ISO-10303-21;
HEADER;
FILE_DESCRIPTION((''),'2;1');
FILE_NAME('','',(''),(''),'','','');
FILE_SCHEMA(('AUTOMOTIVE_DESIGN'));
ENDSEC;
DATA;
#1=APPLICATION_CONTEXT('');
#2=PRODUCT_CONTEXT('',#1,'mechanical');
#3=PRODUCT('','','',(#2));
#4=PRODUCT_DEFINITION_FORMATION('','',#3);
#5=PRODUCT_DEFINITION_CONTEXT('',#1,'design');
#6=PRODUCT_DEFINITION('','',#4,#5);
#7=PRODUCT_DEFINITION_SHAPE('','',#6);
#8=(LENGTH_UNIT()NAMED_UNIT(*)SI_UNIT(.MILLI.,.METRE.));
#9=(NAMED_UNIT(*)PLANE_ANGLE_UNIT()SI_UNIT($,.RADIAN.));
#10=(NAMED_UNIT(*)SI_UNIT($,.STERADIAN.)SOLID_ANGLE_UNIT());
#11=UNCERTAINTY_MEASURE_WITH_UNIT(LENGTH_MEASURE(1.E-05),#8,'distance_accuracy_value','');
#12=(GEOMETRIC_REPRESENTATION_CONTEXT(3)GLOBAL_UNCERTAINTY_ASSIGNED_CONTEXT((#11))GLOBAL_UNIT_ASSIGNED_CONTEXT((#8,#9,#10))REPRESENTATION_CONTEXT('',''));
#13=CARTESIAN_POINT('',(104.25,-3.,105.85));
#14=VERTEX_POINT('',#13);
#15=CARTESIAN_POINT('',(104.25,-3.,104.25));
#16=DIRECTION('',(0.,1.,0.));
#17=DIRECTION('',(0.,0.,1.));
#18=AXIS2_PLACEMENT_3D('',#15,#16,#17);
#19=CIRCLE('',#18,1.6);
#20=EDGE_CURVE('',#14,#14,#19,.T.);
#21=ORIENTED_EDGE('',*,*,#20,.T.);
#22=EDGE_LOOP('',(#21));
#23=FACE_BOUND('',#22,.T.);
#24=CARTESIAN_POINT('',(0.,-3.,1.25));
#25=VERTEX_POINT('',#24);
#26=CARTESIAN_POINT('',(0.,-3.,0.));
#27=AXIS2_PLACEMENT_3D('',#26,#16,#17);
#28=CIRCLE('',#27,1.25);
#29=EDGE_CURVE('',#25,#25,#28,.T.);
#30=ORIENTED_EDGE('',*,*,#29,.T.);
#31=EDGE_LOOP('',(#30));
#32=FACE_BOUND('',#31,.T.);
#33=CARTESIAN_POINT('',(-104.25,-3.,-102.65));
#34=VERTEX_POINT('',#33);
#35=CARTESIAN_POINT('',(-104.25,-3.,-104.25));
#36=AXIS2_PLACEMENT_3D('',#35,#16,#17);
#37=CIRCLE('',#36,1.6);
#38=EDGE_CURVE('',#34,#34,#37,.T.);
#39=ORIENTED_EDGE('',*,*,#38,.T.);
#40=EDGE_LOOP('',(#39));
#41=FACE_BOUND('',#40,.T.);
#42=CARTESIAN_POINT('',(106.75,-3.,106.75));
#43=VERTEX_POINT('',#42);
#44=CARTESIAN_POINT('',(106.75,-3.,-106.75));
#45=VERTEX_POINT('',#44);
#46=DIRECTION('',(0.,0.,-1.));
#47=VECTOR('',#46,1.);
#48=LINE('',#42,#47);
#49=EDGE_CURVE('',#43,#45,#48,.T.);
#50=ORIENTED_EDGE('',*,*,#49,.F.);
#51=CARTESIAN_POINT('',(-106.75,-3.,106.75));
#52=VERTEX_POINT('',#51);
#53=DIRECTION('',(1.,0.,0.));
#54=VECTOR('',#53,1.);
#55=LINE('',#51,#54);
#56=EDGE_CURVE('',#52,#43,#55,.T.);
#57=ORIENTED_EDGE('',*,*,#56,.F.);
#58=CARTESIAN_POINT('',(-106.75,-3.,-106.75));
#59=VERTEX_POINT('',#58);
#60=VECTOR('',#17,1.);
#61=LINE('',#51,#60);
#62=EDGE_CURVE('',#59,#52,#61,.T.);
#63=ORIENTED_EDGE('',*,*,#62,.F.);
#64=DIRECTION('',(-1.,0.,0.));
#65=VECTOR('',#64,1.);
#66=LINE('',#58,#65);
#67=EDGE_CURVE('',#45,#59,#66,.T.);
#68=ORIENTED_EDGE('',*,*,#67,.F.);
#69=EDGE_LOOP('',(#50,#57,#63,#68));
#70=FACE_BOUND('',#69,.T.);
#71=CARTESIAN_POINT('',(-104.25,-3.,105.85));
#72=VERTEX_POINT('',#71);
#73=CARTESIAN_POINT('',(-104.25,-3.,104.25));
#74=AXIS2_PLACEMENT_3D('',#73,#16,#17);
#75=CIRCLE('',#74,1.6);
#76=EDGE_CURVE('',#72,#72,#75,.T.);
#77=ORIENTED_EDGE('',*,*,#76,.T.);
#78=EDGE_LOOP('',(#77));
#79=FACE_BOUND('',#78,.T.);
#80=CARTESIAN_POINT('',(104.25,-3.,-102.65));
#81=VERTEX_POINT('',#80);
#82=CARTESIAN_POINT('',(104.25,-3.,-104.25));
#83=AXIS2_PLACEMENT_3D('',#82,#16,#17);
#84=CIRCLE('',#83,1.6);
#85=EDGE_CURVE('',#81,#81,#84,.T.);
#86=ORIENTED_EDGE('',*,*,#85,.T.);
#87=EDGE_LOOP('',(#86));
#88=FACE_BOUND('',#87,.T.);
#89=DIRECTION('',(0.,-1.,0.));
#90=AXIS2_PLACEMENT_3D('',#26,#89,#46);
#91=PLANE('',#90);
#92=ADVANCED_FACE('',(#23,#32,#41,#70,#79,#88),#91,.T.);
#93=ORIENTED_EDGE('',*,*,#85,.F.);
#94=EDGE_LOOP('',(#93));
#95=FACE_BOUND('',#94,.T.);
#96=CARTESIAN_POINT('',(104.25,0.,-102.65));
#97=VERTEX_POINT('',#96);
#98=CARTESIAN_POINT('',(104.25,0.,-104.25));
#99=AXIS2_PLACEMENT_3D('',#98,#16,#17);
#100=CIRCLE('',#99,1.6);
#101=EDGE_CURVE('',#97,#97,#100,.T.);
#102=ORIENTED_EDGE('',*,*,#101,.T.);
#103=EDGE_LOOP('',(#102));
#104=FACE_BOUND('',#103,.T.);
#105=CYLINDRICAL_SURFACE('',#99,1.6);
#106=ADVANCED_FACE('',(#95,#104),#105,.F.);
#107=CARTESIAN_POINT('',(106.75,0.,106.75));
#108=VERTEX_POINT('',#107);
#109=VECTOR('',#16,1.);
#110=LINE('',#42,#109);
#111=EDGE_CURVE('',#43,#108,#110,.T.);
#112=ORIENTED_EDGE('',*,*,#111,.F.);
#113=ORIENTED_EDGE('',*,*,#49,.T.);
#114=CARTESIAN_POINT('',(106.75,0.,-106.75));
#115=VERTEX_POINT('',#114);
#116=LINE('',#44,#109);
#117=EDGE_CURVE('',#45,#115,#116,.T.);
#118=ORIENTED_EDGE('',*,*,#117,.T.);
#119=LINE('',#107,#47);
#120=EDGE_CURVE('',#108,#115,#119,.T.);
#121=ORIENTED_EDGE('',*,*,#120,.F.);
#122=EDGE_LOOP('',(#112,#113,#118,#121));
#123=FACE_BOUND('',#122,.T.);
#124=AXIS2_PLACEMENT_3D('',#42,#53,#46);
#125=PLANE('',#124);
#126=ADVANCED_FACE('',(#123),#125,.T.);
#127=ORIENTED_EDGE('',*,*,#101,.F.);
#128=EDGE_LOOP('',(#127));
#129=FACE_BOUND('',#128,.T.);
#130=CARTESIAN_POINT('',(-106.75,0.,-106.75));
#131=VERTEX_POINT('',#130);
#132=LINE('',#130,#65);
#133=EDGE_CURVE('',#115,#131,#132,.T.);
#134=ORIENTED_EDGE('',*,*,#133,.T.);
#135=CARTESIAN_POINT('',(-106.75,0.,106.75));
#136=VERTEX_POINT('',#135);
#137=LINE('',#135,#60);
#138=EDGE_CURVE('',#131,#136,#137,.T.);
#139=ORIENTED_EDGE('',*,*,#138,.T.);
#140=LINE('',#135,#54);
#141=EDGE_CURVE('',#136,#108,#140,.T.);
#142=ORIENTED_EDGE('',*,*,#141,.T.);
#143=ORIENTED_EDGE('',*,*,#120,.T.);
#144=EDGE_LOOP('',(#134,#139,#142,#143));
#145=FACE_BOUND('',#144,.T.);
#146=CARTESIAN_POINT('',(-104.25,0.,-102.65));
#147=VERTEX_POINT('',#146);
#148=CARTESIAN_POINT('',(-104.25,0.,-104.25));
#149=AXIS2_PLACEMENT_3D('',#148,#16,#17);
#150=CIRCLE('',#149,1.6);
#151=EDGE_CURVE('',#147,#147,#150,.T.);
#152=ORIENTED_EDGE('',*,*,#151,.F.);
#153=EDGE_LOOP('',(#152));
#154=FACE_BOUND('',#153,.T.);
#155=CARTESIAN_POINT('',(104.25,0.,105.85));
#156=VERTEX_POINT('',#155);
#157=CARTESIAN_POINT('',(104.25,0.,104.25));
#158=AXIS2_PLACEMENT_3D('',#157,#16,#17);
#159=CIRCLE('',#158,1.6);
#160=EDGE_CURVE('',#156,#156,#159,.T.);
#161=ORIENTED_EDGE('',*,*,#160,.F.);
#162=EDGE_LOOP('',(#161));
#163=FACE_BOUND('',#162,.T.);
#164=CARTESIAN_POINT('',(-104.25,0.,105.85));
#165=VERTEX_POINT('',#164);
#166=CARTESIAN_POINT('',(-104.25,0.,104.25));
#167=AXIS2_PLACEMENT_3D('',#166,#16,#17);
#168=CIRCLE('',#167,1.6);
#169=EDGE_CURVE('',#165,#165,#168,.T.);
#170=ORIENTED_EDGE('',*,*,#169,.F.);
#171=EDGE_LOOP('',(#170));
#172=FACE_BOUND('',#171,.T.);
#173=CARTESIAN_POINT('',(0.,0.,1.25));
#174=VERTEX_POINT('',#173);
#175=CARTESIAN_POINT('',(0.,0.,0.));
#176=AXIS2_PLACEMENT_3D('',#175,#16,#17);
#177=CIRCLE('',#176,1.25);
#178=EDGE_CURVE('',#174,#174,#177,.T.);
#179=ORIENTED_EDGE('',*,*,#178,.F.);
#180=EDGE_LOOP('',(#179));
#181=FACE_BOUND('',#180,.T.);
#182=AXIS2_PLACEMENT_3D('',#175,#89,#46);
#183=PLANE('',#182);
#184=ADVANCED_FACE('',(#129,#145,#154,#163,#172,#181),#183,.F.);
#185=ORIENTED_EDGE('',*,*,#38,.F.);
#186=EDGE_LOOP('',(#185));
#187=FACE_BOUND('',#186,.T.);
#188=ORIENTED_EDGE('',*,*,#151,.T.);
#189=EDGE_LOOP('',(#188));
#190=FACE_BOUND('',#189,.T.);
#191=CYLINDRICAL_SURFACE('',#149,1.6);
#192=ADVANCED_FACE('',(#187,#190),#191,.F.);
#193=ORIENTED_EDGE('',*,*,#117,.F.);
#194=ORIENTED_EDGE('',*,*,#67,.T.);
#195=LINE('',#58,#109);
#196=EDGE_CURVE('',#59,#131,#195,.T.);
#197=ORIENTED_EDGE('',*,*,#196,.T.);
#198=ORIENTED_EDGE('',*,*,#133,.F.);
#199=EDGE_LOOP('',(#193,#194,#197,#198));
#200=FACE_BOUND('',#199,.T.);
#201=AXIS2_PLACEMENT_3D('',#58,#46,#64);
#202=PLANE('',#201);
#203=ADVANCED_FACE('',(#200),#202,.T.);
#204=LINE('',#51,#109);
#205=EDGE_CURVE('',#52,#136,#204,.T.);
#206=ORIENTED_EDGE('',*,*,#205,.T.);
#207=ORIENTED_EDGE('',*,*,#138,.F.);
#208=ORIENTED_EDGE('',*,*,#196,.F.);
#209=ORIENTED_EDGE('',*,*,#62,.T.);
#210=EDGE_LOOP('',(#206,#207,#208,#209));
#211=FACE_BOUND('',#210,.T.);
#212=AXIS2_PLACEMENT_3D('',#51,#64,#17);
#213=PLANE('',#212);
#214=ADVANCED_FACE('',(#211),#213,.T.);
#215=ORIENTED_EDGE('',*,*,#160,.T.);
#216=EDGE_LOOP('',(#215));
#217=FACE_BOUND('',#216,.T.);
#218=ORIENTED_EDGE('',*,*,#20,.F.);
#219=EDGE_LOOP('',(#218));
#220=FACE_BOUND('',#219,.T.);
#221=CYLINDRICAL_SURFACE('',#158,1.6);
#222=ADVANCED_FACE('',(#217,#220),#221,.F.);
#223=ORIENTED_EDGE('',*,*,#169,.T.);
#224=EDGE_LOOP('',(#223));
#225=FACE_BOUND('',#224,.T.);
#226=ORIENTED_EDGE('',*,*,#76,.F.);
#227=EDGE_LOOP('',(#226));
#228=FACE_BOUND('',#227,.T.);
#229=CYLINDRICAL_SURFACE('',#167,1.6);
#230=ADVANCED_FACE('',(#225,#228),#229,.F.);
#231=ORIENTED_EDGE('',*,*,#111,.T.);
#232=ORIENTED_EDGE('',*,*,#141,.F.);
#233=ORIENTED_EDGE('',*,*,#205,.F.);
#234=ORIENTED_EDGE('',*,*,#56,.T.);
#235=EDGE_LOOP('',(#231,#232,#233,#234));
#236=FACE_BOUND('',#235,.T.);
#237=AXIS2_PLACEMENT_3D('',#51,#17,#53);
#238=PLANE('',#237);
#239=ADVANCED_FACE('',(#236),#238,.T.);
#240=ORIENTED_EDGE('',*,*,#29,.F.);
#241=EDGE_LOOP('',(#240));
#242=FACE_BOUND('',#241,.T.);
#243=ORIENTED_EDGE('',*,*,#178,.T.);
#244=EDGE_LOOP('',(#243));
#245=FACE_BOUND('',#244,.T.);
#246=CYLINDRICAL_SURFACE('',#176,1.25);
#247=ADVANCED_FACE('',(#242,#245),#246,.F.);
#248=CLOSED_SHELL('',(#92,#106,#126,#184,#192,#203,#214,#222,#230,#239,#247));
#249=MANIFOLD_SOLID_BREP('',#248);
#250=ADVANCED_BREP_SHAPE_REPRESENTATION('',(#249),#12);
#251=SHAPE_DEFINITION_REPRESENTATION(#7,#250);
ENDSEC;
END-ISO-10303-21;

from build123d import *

# Parameters (mm, degrees)
SKETCH1_W                       = 213.5
SKETCH1_H                       = 213.5
BASE_FLANGE1_DEPTH              = 3
F_3_0MM_CLEARANCE_DOWEL_HOLE1_D = 3.2
F_2_5MM_CLEARANCE_DOWEL_HOLE1_D = 2.5


# Sheet-metal steps are written as plain solids
with BuildPart() as part:
    # Sketch1 → Base-Flange1 (new body)
    with BuildSketch(Plane(origin=(0, 0, 0), x_dir=(1, 0, 0), z_dir=(0, 1, 0))):
        Rectangle(SKETCH1_W, SKETCH1_H)
    extrude(amount=-BASE_FLANGE1_DEPTH)

    # Ø3.0mm Clearance Dowel Hole1 (through all)
    with Locations(Plane(origin=(0, 0, 0), x_dir=(1, 0, 0), z_dir=(0, 1, 0))):
        with Locations((-104.25, 104.25), (-104.25, -104.25)):
            f_3_0mm_clearance_dowel_hole1 = Hole(F_3_0MM_CLEARANCE_DOWEL_HOLE1_D / 2)

    # Mirror2: Ø3.0mm Clearance Dowel Hole1 across plane
    add(f_3_0mm_clearance_dowel_hole1.mirror(Plane(origin=(0, 0, 0), x_dir=(0, 0, 1), z_dir=(1, 0, 0))), mode=Mode.SUBTRACT)

    # Ø2.5mm Clearance Dowel Hole1 (through all)
    with Locations(Plane(origin=(0, 0, 0), x_dir=(1, 0, 0), z_dir=(0, 1, 0))):
        with Locations((0, 0)):
            Hole(F_2_5MM_CLEARANCE_DOWEL_HOLE1_D / 2)


solid = part.part
